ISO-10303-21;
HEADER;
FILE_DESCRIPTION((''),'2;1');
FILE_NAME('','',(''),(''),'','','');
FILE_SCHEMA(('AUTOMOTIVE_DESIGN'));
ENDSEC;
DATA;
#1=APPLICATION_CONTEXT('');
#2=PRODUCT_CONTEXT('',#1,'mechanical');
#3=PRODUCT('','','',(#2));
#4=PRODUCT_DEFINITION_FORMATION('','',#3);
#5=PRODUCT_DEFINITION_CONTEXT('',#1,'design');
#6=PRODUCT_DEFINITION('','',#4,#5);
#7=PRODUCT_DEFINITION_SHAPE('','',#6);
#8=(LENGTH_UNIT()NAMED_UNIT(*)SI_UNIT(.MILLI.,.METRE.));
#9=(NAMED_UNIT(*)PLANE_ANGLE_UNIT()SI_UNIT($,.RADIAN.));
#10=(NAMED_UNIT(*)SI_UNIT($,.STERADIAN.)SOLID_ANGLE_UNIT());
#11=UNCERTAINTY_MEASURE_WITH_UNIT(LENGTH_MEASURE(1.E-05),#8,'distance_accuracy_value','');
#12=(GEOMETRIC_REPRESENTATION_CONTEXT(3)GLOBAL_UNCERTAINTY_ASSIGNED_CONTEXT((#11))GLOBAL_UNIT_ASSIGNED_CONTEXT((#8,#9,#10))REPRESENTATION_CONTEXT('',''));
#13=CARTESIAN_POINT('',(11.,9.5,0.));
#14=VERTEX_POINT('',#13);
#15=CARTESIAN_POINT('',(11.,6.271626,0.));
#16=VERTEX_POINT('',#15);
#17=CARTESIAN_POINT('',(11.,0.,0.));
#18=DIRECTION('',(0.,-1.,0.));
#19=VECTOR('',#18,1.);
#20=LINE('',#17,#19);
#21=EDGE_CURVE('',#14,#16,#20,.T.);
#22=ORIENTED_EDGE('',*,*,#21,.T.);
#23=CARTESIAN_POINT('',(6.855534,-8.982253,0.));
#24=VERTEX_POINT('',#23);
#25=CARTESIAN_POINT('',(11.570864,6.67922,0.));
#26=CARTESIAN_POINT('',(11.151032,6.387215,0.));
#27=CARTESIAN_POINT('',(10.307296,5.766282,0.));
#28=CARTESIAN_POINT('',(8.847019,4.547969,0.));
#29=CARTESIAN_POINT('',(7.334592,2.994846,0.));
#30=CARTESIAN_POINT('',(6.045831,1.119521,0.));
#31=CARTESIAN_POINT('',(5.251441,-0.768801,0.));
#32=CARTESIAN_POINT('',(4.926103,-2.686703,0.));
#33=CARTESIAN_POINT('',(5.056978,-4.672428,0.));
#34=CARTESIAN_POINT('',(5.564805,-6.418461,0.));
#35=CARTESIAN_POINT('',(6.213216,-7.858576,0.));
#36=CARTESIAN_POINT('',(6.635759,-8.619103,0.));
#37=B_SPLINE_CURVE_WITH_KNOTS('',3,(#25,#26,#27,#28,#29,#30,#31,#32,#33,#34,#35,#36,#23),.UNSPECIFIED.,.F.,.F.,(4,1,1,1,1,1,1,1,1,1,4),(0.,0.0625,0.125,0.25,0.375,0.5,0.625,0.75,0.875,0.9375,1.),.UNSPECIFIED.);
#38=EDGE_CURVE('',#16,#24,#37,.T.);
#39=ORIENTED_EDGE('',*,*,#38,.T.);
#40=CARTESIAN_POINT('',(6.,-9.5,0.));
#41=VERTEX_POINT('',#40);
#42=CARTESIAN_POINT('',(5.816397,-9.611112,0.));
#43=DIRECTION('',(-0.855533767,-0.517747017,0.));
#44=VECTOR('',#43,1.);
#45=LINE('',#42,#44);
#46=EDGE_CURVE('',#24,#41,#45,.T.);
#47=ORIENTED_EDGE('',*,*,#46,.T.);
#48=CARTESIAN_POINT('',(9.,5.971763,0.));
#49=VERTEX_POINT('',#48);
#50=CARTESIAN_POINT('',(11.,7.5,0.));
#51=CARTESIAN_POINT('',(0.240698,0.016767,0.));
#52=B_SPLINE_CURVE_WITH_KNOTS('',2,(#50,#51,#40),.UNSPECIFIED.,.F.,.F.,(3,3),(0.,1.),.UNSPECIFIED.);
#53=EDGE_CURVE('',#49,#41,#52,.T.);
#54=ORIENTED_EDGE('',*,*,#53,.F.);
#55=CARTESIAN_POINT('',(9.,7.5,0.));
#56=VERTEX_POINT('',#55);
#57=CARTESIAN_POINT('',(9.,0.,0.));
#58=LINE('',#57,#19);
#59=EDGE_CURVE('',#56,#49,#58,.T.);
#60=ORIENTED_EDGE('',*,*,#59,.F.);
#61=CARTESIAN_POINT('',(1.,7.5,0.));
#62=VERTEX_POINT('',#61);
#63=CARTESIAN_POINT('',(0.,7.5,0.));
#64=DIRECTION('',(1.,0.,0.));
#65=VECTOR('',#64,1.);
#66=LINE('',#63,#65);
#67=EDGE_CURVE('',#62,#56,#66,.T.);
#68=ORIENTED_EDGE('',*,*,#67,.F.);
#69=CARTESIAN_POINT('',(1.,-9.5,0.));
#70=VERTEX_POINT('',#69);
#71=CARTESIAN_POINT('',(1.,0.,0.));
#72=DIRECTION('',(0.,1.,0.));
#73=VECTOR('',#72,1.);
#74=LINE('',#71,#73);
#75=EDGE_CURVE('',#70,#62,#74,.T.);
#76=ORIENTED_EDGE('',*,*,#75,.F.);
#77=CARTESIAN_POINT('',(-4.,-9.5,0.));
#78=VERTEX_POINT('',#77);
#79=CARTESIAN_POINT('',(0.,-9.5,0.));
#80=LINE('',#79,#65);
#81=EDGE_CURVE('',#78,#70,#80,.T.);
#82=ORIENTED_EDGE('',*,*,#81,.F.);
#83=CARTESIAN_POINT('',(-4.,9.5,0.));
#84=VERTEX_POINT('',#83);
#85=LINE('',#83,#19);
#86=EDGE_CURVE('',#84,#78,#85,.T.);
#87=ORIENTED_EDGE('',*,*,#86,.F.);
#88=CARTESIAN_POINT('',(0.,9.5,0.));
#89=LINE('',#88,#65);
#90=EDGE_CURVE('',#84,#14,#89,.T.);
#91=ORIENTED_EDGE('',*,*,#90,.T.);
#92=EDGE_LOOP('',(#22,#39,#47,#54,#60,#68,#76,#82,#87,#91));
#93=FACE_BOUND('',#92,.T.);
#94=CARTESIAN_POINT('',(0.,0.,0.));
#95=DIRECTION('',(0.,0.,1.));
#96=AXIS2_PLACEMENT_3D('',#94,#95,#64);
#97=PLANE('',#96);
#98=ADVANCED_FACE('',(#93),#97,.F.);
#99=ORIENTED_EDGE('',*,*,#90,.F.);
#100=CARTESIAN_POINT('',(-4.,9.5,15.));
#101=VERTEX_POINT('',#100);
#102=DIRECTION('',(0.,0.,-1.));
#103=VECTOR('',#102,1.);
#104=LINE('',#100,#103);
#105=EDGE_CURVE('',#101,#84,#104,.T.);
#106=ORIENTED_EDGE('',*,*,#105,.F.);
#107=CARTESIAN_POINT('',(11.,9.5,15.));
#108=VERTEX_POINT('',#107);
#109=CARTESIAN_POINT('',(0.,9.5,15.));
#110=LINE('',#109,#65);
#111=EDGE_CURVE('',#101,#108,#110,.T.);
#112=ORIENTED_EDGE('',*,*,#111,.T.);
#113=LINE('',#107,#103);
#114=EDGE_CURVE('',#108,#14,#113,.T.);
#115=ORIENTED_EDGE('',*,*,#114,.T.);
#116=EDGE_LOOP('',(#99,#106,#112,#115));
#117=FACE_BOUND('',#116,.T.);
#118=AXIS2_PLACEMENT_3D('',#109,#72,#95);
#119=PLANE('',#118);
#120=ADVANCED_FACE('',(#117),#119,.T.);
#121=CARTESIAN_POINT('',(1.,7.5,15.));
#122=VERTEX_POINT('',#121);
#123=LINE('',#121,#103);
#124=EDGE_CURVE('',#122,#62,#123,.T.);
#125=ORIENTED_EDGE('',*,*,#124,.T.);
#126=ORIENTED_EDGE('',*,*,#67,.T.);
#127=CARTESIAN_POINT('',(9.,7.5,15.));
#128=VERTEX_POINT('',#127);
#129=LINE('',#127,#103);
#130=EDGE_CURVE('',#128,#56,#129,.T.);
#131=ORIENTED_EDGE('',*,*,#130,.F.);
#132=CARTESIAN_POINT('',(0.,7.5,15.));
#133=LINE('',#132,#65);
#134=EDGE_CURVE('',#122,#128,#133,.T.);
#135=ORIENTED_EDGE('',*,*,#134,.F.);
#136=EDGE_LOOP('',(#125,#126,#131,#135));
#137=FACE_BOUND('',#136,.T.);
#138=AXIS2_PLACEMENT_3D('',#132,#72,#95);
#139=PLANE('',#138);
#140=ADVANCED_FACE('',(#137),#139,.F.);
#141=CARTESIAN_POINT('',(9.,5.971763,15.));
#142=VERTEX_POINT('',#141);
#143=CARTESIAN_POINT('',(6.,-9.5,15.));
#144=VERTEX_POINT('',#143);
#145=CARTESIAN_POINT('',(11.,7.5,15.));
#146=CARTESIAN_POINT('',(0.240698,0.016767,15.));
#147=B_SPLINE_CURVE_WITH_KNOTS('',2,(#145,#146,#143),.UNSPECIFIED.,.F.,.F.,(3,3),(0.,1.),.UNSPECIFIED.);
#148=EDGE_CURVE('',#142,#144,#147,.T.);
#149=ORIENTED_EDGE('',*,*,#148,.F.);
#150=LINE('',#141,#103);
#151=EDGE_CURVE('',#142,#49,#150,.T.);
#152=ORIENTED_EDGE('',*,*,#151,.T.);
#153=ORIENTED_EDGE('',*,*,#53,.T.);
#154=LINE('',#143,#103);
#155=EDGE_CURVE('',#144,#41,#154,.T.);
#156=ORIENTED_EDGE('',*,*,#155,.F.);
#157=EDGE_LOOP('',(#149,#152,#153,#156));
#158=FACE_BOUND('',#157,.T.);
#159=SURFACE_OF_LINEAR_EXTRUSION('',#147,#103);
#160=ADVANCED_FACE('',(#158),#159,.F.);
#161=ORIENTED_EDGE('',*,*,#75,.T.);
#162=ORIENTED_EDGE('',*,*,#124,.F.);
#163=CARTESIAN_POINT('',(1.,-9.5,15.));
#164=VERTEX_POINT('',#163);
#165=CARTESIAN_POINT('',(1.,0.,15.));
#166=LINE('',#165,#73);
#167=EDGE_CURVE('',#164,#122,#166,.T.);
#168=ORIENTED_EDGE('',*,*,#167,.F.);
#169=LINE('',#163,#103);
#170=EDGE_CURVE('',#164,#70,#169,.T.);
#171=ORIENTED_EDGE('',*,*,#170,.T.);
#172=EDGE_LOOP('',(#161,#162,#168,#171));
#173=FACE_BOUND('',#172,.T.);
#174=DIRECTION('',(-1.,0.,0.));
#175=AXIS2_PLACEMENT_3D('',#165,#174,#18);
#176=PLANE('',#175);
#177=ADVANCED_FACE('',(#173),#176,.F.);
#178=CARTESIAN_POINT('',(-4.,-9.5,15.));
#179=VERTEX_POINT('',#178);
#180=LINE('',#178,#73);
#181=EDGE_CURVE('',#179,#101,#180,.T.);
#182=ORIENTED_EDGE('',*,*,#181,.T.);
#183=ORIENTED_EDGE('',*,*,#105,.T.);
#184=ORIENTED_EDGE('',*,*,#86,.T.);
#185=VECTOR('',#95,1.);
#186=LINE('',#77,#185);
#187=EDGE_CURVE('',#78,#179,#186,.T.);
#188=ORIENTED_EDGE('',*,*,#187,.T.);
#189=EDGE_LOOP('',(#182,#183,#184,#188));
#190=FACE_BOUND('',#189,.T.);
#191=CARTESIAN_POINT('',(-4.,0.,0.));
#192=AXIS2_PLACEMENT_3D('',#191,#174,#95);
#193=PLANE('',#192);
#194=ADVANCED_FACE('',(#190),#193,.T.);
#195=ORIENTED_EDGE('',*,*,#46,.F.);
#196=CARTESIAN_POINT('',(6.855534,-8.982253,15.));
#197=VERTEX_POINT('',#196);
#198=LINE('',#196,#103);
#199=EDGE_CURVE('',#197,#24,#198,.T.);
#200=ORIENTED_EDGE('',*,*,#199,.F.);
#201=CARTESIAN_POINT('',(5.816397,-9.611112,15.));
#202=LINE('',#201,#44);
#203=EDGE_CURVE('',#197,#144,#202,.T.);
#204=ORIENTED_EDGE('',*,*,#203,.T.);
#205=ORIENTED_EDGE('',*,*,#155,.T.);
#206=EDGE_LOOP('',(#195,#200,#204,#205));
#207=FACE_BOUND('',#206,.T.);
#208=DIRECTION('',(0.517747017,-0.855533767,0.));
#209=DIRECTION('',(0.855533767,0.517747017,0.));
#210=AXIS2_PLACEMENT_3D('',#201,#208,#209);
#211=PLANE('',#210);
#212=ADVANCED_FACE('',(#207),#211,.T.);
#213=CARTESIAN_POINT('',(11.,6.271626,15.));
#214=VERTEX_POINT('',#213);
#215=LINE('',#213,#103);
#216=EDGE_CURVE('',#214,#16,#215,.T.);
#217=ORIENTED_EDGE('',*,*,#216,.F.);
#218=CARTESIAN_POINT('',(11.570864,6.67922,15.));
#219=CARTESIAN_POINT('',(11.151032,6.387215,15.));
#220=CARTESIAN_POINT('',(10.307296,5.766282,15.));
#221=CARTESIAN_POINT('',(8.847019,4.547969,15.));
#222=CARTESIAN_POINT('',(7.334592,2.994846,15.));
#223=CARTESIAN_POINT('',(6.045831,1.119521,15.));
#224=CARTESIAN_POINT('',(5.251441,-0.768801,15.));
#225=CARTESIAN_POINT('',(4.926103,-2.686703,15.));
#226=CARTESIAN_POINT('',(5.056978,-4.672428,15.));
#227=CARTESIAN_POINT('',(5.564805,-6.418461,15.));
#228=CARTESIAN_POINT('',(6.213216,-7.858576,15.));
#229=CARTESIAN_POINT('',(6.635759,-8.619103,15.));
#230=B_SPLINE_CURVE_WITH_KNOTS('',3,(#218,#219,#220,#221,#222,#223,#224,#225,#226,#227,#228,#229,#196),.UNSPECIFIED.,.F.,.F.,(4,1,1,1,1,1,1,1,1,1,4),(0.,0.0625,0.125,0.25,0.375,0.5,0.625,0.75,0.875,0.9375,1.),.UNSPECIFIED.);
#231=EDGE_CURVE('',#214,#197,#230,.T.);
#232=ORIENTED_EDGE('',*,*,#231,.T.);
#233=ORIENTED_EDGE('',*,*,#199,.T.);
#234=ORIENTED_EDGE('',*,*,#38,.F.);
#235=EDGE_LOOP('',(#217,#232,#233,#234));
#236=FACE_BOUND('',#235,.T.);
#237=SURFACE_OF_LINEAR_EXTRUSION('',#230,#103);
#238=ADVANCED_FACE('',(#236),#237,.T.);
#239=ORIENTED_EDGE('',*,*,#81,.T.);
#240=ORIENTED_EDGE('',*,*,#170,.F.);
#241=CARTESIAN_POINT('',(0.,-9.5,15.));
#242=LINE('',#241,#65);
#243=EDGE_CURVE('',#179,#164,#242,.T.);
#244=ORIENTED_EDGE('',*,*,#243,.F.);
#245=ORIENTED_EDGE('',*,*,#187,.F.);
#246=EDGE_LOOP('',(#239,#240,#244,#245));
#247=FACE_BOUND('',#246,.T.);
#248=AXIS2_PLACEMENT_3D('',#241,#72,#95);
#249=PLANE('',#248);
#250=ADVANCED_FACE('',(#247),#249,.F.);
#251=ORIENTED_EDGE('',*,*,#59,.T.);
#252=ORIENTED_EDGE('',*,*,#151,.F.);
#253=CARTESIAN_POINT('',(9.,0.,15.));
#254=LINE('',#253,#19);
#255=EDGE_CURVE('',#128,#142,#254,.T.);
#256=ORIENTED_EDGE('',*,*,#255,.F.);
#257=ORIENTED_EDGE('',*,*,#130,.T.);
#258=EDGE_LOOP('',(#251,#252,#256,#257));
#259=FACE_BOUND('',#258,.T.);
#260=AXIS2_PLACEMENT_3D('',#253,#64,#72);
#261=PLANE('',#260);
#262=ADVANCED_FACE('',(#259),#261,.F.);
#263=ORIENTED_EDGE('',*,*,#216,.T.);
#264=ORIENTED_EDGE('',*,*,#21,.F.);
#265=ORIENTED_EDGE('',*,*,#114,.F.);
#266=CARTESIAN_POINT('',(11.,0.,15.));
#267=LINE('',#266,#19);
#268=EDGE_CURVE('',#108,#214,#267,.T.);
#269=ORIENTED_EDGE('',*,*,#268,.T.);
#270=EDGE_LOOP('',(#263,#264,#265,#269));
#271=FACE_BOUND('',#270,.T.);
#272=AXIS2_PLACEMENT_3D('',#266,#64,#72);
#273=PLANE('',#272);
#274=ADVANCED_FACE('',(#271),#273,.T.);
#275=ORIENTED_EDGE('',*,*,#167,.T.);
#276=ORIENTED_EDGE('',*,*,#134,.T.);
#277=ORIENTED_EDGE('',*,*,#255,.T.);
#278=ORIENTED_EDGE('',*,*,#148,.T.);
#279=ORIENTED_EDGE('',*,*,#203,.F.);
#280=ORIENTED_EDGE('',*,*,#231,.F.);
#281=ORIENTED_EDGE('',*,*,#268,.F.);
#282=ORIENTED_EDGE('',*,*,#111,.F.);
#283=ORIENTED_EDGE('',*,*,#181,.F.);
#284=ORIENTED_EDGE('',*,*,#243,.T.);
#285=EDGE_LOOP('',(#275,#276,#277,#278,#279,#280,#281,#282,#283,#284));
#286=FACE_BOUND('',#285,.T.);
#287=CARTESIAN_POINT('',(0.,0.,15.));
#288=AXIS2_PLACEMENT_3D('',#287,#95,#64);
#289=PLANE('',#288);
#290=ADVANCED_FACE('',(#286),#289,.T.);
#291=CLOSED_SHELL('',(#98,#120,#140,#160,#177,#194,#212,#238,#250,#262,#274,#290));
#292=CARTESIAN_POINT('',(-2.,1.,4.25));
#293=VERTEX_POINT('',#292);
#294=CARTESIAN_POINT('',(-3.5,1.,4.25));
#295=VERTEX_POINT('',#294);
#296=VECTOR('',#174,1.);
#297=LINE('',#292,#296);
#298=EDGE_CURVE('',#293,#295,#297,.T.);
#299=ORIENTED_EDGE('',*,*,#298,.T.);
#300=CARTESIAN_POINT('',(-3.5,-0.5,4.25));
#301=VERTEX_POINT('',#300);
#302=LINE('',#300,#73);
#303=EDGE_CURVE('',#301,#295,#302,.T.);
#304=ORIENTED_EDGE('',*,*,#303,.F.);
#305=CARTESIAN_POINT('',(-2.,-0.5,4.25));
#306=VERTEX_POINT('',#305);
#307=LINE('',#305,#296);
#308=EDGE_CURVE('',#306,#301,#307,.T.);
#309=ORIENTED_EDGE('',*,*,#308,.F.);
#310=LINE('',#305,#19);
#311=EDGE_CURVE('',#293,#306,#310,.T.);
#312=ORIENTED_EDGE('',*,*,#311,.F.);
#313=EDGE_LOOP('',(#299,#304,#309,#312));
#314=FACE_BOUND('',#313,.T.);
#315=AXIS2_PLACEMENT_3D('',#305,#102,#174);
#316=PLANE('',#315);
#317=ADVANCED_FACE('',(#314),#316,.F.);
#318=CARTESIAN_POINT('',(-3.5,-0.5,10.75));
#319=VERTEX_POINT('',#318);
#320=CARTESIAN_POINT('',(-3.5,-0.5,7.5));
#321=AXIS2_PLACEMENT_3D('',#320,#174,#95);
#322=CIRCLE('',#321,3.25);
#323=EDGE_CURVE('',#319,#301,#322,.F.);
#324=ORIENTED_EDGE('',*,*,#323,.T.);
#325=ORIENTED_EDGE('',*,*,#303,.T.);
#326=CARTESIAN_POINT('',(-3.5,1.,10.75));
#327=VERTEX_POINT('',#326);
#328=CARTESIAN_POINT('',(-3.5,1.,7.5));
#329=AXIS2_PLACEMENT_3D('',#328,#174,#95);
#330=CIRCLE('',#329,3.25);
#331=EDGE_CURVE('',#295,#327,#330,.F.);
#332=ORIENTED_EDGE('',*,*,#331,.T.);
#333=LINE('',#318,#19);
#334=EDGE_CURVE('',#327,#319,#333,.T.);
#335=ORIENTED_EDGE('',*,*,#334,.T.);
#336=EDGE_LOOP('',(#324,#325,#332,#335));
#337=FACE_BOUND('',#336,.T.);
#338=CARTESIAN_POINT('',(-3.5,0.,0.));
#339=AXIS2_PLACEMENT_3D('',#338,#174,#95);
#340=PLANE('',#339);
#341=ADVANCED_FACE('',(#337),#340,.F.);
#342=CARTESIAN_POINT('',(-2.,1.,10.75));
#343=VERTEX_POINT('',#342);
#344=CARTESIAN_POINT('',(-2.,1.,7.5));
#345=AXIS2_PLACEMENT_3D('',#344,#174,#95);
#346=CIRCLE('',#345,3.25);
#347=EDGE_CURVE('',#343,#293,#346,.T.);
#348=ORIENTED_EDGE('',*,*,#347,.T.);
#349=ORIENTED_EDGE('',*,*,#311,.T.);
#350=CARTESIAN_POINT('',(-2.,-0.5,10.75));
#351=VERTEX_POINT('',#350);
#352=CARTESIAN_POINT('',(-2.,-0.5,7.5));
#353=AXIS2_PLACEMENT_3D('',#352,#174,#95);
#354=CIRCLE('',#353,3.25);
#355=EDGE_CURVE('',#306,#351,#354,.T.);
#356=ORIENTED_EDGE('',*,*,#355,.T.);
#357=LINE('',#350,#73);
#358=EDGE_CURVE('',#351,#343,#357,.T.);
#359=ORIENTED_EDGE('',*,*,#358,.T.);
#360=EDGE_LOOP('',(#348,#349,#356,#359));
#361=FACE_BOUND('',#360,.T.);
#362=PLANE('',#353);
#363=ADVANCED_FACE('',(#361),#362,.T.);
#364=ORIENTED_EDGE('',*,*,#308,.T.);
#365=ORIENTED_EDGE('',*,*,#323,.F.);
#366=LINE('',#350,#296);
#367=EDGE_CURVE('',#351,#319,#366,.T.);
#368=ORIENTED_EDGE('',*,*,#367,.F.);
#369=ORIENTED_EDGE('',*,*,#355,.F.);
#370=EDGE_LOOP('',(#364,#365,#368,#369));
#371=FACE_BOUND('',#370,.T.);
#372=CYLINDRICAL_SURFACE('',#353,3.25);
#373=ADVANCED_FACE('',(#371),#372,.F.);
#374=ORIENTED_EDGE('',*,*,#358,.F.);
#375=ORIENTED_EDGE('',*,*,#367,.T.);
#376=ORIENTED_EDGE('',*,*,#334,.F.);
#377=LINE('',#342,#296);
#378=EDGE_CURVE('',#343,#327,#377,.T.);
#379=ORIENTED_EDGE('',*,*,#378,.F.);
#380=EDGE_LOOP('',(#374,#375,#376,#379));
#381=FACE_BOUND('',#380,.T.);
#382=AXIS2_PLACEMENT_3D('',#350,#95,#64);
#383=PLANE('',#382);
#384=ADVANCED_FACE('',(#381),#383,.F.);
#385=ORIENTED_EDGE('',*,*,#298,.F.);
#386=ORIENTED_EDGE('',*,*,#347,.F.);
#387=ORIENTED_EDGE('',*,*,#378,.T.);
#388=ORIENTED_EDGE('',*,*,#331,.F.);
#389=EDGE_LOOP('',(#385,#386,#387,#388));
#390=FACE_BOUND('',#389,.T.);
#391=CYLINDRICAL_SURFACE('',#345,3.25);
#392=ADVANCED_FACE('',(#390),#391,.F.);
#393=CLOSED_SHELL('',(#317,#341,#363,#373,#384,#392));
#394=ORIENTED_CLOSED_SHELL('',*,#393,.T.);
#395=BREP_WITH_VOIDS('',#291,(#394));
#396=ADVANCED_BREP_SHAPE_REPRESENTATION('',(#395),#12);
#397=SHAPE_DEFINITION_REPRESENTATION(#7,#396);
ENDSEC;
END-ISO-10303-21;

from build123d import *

# Parameters (mm, degrees)
AUFSATZ_LINEAR_AUSTRAGEN1_DEPTH = 15
SKIZZE2_W                       = 15
SKIZZE2_H                       = 19
AUFSATZ_LINEAR_AUSTRAGEN2_DEPTH = 3
SCHNITT_LINEAR_AUSTRAGEN1_DEPTH = 2
SKIZZE5_W                       = 15
SKIZZE5_H                       = 19
AUFSATZ_LINEAR_AUSTRAGEN4_DEPTH = 0.5


# Read off the part's stored shape, not the designer's step: Aufsatz-Linear austragen1
with BuildPart() as part:
    # Aufsatz-Linear austragen1 outline → Aufsatz-Linear austragen1 (new body)
    with BuildSketch(Plane.XY):
        with BuildLine():
            Line((9, 7.5), (9, 5.971762746))
            add(Edge.make_bspline(
                [(9, 5.971762746), (0.820844208, -0.941876975), (6, -9.5)],
                knots=[0.100732064, 0.100732064, 0.100732064, 1, 1, 1], degree=2))
            Line((6, -9.5), (6.855533767, -8.982252983))
            add(Edge.make_bspline(
                [(11, 6.271626074), (10.77340825, 6.105599677), (10.141366733, 5.627846644), (8.84701886, 4.547968637), (7.334591853, 2.994846091), (6.045831159, 1.119520738), (5.251441489, -0.76880078), (4.926102544, -2.686703365), (5.056978024, -4.672427827), (5.564804841, -6.418461308), (6.213216116, -7.858576344), (6.635759495, -8.619102834), (6.855533767, -8.982252983)],
                knots=[0.028407204, 0.028407204, 0.028407204, 0.028407204, 0.0625, 0.125, 0.25, 0.375, 0.5, 0.625, 0.75, 0.875, 0.9375, 1, 1, 1, 1], degree=3))
            Line((11, 6.271626074), (11, 9.5))
            Line((11, 9.5), (-1, 9.5))
            Line((-1, 9.5), (-1, -9.5))
            Line((-1, -9.5), (1, -9.5))
            Line((1, -9.5), (1, 7.5))
            Line((1, 7.5), (9, 7.5))
        make_face()
    extrude(amount=AUFSATZ_LINEAR_AUSTRAGEN1_DEPTH)

    # Skizze2 → Aufsatz-Linear austragen2 (add)
    with BuildSketch(Plane.ZY.offset(1)):
        with Locations((7.5, 0)):
            Rectangle(SKIZZE2_W, SKIZZE2_H)
    extrude(amount=AUFSATZ_LINEAR_AUSTRAGEN2_DEPTH)

    # Skizze3 → Schnitt-Linear austragen1 (cut)
    with BuildSketch(Plane.ZY.offset(4)):
        with BuildLine():
            Line((4.25, -0.5), (4.25, 1))
            ThreePointArc((4.25, 1), (7.5, 4.25), (10.75, 1))
            Line((10.75, 1), (10.75, -0.5))
            ThreePointArc((10.75, -0.5), (7.5, -3.75), (4.25, -0.5))
        make_face()
    extrude(amount=-SCHNITT_LINEAR_AUSTRAGEN1_DEPTH, mode=Mode.SUBTRACT)

    # Skizze5 → Aufsatz-Linear austragen4 (add)
    with BuildSketch(Plane.ZY.offset(4)):
        with Locations((7.5, 0)):
            Rectangle(SKIZZE5_W, SKIZZE5_H)
    extrude(amount=-AUFSATZ_LINEAR_AUSTRAGEN4_DEPTH)


solid = part.part
